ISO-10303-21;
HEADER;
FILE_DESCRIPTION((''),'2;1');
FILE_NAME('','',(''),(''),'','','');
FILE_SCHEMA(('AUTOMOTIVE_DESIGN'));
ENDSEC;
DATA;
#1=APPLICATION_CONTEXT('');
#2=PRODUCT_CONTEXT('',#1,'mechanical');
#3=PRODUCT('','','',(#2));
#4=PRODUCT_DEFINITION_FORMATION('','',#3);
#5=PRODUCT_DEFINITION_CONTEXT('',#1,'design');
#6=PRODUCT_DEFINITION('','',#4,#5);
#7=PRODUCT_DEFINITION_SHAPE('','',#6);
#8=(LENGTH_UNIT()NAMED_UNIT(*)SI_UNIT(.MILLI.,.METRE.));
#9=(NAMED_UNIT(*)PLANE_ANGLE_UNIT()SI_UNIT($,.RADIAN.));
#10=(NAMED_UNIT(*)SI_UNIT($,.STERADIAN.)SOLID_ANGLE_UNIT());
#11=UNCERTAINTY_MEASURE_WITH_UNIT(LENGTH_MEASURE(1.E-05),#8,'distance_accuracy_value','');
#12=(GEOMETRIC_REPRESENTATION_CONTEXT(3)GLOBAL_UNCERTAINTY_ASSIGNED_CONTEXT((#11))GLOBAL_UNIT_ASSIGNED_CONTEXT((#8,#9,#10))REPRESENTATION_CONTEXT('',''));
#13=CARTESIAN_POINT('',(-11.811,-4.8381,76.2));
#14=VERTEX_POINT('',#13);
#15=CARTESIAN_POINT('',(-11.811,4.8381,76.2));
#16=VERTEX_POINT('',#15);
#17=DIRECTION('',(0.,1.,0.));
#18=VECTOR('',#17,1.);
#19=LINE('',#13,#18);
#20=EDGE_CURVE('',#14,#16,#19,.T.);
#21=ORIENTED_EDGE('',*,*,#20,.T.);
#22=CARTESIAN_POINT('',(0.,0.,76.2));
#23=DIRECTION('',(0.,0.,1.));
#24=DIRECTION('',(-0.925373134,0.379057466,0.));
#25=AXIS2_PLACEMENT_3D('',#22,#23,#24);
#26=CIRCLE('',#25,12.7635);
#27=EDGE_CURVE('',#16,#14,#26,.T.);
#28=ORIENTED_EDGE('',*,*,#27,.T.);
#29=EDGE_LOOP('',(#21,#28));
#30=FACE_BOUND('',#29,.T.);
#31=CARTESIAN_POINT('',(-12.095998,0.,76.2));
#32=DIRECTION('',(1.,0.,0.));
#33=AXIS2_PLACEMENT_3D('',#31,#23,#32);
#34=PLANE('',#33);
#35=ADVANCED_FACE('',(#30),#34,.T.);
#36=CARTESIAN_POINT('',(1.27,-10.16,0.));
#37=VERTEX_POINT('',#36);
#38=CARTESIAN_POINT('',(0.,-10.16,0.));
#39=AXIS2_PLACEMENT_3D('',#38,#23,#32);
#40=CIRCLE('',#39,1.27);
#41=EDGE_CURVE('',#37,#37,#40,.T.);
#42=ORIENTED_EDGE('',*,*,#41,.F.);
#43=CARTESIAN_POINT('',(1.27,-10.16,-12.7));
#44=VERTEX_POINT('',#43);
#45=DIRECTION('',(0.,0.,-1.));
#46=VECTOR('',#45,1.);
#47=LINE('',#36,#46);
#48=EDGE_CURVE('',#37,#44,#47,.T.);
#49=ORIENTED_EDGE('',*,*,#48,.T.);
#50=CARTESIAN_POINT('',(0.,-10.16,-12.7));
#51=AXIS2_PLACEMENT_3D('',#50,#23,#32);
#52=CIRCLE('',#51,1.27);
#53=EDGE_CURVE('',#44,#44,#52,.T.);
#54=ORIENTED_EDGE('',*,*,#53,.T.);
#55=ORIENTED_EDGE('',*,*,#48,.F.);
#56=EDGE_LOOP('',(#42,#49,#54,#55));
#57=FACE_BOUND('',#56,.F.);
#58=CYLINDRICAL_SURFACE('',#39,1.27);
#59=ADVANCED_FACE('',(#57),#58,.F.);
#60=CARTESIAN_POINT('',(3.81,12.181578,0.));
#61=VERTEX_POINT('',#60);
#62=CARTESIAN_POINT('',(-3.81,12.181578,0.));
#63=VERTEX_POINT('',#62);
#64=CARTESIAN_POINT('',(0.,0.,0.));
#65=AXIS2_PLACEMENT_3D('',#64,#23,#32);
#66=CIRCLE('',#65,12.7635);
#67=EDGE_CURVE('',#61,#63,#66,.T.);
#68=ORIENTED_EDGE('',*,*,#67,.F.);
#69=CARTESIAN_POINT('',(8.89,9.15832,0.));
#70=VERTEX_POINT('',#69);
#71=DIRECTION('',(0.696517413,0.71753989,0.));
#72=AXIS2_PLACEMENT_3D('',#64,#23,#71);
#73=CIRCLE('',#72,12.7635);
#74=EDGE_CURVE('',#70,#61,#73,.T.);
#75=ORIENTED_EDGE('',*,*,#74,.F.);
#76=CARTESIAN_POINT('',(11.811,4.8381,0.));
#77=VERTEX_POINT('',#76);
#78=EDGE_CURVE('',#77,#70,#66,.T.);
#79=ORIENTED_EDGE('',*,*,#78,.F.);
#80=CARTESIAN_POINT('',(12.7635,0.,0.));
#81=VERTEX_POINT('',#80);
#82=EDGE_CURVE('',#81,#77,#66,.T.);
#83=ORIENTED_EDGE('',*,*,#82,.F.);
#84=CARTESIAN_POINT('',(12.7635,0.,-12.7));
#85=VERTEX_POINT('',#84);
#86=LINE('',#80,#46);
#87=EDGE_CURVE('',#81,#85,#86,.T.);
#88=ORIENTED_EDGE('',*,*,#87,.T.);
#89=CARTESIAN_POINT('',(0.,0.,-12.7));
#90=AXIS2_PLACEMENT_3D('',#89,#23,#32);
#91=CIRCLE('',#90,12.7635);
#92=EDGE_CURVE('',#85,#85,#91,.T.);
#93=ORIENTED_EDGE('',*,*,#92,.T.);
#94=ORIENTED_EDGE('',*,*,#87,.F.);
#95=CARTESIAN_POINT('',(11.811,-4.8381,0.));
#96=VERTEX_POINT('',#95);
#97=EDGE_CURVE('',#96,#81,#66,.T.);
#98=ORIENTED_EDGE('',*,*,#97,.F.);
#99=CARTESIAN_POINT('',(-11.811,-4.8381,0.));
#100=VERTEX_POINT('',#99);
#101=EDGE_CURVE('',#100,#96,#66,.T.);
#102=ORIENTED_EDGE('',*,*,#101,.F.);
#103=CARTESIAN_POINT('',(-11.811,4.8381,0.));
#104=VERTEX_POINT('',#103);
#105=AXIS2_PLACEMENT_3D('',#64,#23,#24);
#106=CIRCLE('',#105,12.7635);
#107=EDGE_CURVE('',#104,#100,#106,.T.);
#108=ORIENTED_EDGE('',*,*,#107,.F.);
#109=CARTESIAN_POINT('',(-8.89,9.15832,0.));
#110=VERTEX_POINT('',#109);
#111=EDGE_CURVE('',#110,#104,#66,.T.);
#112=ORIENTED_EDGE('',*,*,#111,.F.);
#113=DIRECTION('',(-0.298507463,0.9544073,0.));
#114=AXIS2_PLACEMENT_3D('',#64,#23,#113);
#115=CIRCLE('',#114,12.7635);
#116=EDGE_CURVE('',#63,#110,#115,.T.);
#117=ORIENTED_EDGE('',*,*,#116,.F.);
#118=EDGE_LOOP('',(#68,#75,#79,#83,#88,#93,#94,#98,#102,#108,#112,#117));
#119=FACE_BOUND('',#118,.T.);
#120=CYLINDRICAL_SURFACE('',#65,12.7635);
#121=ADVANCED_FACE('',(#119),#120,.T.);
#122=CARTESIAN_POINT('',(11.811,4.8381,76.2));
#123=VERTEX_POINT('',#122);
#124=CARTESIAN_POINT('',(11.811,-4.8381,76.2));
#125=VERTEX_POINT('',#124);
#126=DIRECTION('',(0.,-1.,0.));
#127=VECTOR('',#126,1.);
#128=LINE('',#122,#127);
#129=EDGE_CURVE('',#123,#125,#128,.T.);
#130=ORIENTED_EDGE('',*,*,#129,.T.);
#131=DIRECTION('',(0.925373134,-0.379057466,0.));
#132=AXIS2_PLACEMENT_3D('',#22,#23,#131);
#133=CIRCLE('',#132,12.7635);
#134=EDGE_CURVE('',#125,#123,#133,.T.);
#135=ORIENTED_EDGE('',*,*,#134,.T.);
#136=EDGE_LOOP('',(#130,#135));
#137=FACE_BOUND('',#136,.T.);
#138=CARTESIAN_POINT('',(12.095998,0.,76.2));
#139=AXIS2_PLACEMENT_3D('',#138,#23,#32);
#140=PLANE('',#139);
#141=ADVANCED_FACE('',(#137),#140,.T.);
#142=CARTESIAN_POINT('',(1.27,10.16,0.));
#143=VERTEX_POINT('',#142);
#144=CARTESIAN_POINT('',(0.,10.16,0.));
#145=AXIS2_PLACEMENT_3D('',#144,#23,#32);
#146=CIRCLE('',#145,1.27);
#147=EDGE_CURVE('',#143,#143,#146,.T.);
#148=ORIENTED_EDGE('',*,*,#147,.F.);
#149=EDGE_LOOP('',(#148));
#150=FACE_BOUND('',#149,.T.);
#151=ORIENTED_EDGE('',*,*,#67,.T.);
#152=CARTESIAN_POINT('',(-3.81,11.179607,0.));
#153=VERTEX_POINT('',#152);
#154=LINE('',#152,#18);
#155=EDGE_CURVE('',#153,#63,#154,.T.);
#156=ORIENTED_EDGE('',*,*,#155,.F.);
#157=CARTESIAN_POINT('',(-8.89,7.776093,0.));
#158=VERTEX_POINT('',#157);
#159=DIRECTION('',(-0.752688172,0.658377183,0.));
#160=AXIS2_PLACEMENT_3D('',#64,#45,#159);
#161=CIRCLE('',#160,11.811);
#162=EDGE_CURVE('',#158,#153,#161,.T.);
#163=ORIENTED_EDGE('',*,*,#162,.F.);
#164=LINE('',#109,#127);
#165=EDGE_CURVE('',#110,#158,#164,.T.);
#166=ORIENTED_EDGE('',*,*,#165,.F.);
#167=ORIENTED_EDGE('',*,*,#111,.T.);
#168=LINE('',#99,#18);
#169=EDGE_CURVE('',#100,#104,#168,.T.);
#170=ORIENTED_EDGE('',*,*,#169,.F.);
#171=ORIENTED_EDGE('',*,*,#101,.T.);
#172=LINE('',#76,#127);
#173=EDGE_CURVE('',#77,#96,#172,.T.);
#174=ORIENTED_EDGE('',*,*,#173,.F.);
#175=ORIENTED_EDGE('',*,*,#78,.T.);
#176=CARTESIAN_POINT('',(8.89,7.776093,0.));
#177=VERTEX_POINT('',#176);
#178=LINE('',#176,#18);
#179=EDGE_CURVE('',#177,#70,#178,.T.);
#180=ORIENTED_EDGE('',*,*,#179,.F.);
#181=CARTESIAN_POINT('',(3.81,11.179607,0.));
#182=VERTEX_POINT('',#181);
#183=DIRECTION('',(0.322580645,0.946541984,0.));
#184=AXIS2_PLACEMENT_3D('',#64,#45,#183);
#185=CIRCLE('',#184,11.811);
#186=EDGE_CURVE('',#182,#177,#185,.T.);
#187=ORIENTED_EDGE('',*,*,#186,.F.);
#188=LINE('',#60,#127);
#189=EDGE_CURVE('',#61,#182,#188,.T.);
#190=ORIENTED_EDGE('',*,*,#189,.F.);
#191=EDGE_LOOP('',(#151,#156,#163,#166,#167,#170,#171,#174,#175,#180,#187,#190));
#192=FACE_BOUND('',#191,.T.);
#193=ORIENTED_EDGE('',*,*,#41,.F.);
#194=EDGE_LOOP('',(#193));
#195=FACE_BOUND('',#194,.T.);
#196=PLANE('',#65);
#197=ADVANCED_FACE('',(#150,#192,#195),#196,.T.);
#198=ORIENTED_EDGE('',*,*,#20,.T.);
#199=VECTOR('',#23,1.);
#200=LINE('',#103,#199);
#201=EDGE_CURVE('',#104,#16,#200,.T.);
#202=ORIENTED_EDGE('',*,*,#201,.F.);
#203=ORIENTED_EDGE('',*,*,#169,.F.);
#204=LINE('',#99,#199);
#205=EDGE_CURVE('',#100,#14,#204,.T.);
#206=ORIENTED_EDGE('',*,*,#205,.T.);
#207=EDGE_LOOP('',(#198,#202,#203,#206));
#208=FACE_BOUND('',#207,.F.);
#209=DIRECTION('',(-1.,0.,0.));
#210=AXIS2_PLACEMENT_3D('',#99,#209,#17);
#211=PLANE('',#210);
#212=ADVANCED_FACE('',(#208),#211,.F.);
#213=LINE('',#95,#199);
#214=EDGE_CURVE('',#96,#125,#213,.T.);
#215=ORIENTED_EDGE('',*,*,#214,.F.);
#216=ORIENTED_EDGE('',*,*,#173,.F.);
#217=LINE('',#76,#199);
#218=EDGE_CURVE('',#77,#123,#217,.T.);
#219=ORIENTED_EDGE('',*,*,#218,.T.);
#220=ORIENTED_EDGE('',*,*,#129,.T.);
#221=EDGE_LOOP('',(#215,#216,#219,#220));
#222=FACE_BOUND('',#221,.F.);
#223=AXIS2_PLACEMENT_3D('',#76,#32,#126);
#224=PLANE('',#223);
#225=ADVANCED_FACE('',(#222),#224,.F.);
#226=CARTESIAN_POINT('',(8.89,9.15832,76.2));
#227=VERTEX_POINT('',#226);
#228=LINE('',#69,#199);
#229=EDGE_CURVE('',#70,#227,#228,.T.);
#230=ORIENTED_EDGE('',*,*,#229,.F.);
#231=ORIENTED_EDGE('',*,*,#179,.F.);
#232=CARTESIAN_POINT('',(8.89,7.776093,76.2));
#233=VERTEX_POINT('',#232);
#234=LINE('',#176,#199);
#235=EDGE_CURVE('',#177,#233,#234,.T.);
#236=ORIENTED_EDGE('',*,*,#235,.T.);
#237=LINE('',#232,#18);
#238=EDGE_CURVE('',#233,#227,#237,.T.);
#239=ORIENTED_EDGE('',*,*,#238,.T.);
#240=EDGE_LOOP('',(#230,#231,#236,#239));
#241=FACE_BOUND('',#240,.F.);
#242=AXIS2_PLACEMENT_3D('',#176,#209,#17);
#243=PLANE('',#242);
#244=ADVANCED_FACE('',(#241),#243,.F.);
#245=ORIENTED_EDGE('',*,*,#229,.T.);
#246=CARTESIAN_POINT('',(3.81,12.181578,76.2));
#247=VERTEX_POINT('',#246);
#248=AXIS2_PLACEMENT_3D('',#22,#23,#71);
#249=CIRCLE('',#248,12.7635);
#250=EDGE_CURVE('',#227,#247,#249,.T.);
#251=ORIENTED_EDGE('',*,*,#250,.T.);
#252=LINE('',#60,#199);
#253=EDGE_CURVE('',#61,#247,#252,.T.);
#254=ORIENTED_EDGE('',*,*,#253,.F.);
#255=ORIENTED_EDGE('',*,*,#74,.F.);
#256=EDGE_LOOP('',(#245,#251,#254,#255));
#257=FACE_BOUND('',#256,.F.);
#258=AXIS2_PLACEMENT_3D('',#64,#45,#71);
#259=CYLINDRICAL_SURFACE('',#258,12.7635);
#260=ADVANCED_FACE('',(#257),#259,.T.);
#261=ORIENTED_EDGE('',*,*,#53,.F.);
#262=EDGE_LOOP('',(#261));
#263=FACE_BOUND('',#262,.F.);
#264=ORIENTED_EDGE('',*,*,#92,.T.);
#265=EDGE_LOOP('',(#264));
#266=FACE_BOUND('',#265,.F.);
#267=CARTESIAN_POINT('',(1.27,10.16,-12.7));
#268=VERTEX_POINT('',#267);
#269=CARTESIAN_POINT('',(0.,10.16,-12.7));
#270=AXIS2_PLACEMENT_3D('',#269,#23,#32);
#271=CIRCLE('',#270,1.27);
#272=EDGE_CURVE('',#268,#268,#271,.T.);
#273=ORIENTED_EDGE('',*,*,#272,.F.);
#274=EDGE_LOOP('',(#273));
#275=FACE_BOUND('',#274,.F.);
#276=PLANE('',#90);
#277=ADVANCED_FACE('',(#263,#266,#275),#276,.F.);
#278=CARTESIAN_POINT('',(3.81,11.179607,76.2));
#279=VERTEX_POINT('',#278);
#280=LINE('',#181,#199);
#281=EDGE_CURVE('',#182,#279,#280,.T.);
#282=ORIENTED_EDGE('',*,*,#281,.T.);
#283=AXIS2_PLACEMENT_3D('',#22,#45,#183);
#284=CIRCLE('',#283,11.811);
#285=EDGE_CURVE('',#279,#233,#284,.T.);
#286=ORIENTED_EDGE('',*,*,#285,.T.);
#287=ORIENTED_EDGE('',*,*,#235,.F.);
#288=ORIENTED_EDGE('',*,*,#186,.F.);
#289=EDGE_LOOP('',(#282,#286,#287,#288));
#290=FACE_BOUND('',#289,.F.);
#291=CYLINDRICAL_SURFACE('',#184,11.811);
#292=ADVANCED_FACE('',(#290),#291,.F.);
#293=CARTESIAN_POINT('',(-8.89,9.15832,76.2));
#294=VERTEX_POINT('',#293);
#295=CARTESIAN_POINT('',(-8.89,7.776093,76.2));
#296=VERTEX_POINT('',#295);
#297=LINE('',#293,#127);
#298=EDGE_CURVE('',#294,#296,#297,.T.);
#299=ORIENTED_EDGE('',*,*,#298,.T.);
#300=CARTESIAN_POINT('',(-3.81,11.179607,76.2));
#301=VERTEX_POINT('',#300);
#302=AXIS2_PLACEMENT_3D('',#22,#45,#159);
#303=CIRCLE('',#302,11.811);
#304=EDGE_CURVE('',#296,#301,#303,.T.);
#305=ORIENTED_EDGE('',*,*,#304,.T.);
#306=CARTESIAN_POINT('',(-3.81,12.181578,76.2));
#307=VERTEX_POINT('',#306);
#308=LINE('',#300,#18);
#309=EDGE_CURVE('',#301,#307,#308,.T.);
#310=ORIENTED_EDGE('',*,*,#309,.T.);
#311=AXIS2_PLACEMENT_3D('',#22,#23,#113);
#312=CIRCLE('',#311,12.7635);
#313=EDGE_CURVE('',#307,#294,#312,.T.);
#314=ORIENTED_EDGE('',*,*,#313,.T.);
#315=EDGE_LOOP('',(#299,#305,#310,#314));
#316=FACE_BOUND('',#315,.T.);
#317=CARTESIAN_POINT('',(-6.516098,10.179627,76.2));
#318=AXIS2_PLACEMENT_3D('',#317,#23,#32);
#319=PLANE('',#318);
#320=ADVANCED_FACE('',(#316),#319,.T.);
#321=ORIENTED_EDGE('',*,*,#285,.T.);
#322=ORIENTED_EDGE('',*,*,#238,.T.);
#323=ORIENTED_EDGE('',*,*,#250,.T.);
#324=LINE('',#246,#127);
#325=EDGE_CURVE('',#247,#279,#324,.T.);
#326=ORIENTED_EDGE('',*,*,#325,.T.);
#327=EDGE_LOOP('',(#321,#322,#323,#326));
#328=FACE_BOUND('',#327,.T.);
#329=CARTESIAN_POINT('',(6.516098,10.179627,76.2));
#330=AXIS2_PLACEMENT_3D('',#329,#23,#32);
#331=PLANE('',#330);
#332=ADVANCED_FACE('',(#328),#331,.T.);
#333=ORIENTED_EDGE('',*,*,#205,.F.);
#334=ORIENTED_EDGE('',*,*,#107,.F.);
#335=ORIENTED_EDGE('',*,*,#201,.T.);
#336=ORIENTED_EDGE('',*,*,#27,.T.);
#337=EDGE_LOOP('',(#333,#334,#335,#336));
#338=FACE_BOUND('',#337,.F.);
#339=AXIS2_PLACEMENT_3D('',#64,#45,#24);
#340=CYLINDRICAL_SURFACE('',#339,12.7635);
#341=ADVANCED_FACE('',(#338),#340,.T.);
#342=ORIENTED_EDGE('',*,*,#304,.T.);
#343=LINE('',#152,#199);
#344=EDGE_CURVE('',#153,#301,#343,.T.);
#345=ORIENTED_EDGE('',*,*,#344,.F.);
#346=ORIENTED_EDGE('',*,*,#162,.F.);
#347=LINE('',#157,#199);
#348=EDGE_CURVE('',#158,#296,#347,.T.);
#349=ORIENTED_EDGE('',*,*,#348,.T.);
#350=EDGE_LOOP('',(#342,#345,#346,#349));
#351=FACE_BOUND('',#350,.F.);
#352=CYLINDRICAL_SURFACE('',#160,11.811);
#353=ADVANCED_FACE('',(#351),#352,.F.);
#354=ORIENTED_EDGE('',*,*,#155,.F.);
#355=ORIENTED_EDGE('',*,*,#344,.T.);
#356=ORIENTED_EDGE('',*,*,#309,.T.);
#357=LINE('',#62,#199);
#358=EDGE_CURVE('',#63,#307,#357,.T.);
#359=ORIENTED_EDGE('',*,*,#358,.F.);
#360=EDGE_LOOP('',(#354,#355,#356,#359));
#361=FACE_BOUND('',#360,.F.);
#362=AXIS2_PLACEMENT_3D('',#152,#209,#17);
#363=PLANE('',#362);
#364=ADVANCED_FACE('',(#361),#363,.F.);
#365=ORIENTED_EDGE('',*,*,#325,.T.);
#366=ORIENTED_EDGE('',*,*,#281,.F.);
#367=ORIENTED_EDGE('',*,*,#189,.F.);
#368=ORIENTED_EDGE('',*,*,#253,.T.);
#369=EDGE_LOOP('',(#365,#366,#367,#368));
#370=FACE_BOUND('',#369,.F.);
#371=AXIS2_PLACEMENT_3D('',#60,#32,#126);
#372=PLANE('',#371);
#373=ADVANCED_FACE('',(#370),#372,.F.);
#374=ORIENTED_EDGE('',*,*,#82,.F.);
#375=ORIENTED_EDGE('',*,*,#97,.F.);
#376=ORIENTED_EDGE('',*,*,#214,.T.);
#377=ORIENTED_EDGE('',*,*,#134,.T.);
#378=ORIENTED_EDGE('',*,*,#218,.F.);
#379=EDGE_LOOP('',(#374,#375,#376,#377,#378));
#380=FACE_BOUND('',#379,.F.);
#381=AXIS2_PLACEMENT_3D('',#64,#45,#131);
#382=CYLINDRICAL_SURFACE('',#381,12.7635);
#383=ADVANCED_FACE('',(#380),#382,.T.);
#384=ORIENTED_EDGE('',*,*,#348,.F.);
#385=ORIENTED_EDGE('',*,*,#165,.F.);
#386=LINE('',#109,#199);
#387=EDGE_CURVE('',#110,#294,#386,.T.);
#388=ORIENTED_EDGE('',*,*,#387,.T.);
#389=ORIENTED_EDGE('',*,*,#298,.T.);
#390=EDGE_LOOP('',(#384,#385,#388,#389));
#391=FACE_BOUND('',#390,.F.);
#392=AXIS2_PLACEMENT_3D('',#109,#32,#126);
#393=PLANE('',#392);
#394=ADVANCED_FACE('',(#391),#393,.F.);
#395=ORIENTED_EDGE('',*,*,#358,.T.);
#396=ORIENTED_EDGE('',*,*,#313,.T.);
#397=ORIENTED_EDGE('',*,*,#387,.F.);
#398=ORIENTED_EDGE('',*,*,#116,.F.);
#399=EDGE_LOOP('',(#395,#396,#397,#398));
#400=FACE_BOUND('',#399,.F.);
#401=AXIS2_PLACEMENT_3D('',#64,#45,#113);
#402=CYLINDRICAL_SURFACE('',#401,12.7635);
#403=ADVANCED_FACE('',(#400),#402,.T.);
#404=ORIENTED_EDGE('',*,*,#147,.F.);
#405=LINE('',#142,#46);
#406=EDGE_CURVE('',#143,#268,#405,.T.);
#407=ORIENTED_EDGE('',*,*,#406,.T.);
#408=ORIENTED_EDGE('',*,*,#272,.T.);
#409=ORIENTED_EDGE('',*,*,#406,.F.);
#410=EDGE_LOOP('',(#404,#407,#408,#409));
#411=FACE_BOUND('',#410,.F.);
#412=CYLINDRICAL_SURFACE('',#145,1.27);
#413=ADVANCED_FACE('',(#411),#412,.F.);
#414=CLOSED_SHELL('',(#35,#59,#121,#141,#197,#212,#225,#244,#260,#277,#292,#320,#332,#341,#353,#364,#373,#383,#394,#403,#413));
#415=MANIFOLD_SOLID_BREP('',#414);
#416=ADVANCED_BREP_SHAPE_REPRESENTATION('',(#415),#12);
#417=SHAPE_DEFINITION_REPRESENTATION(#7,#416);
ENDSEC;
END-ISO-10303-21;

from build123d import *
from build123d import SkipClean  # not in build123d's __all__

# Parameters (mm, degrees)
F1_R     = 12.7635
F1_R_2   = 1.27
F2_DEPTH = 12.7
F3_DEPTH = 76.2


with BuildPart() as f2:
    # F1 (on Top) → F2 (new body)
    with BuildSketch(Plane.XY):
        Circle(F1_R)
        with Locations((0, -10.16)):
            Circle(F1_R_2, mode=Mode.SUBTRACT)
        with Locations((0, 10.16)):
            Circle(F1_R_2, mode=Mode.SUBTRACT)
    extrude(amount=-F2_DEPTH)

    # F0 (on Top) → F3 (join)
    with BuildSketch(Plane.XY):
        with BuildLine():
            Line((-3.81, 11.1796073724), (-3.81, 12.1815775764))
            ThreePointArc((-3.81, 12.1815775764), (-6.5274436814, 10.9681088268), (-8.89, 9.1583203837))
            Line((-8.89, 9.1583203837), (-8.89, 7.7760929135))
            ThreePointArc((-8.89, 7.7760929135), (-6.5740761836, 9.8123006136), (-3.81, 11.1796073724))
        make_face()
        with BuildLine():
            Line((-11.811, -4.8380999628), (-11.811, 4.8380999628))
            ThreePointArc((-11.811, 4.8380999628), (-12.7635, 0), (-11.811, -4.8380999628))
        make_face()
        with BuildLine():
            ThreePointArc((11.811, -4.8380999628), (12.7635, 0), (11.811, 4.8380999628))
            Line((11.811, 4.8380999628), (11.811, -4.8380999628))
        make_face()
        with BuildLine():
            ThreePointArc((8.89, 9.1583203837), (6.5274436814, 10.9681088268), (3.81, 12.1815775764))
            Line((3.81, 12.1815775764), (3.81, 11.1796073724))
            ThreePointArc((3.81, 11.1796073724), (6.5740761836, 9.8123006136), (8.89, 7.7760929135))
            Line((8.89, 7.7760929135), (8.89, 9.1583203837))
        make_face()
    with SkipClean():  # cleaning this boolean's faces spoils the solid; the shape is the same uncleaned
        extrude(amount=F3_DEPTH)


solid = f2.part
